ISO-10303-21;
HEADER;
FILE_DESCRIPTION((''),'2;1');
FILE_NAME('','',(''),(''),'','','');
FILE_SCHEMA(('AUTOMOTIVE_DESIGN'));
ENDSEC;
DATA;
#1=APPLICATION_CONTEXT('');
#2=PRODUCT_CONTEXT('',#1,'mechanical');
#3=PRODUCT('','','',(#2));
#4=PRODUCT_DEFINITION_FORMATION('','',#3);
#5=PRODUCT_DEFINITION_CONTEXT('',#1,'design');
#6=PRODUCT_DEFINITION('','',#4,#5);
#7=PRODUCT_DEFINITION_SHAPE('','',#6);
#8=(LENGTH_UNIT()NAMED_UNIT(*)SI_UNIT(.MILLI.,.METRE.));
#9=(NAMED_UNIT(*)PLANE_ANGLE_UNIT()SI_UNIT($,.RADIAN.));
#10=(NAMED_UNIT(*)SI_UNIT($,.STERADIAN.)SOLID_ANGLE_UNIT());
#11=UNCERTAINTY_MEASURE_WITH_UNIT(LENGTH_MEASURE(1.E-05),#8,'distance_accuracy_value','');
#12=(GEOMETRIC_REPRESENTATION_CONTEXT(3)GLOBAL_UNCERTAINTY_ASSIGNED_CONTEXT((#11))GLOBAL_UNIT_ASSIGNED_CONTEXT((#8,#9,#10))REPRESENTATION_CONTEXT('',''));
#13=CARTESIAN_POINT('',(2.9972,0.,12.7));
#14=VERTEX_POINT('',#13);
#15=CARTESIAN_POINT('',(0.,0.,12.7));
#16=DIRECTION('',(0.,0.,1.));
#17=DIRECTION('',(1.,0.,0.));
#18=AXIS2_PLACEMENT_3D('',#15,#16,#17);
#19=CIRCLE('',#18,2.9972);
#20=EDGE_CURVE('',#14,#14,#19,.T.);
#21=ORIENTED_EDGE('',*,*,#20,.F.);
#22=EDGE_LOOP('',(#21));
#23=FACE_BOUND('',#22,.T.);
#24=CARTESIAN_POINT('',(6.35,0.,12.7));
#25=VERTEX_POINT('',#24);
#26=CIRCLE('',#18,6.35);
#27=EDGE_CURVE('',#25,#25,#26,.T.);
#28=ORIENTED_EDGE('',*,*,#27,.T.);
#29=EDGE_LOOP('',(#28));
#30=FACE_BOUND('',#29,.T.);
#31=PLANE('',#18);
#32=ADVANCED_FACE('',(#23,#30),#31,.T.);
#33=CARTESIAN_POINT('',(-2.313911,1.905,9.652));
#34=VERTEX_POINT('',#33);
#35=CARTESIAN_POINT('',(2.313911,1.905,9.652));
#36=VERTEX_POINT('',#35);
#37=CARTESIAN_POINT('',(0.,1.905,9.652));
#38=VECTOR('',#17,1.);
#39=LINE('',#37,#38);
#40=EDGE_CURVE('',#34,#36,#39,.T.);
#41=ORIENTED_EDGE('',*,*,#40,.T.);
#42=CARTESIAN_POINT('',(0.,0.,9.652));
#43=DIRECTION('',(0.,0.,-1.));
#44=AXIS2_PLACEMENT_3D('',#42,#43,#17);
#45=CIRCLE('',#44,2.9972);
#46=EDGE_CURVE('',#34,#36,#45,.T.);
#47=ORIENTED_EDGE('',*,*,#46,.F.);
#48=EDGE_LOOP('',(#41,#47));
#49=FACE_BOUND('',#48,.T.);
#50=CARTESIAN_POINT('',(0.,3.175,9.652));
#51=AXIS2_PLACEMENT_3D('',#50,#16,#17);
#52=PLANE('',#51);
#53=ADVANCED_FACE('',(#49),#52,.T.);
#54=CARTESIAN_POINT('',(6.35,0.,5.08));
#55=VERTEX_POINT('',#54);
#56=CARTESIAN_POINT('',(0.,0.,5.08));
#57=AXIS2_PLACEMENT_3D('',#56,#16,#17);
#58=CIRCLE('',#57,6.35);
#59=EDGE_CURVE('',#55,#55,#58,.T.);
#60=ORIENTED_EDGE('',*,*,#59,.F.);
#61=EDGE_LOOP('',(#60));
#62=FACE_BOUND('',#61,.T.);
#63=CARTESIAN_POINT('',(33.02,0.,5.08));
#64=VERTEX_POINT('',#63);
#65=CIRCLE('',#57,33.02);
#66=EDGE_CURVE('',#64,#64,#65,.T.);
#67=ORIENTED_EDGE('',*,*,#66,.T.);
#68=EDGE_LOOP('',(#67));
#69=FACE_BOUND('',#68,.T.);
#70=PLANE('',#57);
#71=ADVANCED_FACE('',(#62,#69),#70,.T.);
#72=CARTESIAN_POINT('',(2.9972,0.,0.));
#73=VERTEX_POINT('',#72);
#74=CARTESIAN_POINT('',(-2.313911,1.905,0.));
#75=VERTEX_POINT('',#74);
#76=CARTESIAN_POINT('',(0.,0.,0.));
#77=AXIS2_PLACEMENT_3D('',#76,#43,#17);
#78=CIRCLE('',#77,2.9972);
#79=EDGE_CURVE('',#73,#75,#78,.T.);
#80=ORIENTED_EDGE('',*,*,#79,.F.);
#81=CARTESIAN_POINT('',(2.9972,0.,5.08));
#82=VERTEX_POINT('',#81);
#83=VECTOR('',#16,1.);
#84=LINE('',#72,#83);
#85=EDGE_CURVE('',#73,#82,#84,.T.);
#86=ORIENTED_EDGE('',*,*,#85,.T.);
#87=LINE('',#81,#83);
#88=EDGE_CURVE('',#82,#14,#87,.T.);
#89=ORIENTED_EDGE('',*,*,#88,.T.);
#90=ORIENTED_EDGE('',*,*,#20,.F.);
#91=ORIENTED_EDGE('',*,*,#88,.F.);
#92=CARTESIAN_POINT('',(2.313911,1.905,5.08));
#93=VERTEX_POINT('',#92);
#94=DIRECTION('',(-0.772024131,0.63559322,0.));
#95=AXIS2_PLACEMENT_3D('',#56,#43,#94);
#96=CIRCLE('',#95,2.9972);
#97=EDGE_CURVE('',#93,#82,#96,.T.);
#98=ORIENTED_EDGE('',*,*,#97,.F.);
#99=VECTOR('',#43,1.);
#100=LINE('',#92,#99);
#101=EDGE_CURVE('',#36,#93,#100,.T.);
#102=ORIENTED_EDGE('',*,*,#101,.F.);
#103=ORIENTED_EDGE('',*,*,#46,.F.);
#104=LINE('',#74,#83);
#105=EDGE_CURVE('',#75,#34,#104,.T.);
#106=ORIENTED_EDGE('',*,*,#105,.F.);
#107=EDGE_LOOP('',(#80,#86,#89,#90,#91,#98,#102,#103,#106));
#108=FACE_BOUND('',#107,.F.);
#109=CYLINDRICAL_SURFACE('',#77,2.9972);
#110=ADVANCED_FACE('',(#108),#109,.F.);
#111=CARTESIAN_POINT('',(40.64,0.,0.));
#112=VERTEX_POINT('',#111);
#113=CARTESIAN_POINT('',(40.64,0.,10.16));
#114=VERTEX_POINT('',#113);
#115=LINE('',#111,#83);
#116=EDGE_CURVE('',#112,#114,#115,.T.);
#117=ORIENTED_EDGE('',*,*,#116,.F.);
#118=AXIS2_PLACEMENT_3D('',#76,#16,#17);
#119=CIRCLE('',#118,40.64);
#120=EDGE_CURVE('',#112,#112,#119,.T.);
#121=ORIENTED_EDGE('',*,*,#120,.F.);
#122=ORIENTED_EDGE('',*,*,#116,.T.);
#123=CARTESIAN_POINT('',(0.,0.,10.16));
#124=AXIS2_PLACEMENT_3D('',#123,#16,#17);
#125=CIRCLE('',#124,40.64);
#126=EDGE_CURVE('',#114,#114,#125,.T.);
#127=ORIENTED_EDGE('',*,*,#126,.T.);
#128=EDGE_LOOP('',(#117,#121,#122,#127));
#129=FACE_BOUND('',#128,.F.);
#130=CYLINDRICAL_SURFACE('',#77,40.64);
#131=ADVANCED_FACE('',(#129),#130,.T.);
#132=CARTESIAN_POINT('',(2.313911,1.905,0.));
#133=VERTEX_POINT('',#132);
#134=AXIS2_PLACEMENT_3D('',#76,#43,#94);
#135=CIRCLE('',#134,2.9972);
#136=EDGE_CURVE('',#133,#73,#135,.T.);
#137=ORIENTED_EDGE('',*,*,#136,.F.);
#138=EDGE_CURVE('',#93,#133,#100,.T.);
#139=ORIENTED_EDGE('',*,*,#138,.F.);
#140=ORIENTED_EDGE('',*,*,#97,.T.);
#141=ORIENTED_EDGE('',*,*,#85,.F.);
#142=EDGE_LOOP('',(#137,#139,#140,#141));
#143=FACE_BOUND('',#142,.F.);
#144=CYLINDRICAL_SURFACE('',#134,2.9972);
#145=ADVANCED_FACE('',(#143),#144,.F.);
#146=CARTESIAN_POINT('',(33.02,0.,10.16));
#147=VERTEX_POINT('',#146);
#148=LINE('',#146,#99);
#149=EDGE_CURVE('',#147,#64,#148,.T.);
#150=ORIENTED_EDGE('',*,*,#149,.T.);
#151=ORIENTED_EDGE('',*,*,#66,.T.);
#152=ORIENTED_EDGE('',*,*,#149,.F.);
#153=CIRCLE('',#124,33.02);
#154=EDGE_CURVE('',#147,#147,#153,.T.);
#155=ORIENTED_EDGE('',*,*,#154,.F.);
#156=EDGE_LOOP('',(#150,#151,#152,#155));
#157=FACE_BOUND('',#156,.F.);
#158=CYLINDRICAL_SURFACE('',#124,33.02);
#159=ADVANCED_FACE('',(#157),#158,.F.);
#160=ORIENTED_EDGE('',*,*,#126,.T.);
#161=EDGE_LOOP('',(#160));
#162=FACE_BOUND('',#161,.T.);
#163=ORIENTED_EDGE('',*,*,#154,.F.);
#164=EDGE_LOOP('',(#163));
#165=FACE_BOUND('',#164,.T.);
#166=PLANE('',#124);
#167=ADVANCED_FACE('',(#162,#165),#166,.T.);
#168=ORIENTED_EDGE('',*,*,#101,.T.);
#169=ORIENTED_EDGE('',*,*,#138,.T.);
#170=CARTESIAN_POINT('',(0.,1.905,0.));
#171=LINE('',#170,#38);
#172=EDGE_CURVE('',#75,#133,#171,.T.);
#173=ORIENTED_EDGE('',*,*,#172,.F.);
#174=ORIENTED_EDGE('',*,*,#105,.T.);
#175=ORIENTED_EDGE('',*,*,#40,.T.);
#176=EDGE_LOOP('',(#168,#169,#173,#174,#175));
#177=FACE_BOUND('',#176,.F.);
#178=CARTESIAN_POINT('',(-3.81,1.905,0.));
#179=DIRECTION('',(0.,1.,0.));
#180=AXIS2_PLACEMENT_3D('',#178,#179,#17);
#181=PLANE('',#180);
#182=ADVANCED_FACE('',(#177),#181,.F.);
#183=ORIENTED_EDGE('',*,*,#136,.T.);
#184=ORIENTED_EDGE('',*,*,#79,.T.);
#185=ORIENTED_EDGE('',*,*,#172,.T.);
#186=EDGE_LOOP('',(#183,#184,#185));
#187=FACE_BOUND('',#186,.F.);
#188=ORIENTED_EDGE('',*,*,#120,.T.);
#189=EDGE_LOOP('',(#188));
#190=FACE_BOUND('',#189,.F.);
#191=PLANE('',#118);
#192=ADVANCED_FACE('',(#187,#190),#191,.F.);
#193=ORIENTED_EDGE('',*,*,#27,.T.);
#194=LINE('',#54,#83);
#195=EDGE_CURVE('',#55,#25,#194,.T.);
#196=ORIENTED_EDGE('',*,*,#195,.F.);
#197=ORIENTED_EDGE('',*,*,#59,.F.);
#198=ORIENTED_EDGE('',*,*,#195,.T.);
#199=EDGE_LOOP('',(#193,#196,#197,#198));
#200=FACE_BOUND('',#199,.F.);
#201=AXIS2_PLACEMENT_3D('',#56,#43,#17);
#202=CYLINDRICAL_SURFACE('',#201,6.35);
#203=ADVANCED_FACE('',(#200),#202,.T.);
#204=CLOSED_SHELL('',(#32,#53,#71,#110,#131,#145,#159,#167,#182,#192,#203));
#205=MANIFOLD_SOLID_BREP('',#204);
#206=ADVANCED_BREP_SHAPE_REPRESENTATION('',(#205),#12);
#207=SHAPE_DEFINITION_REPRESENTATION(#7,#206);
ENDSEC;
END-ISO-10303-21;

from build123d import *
from build123d import SkipClean  # not in build123d's __all__

# Parameters (mm, degrees)
F0_R          = 40.64
F1_DEPTH      = 10.16
F2_R          = 33.02
F3_DEPTH      = 5.08
F5_DEPTH      = 10.16
F6_R          = 6.35
F6_R_2        = 2.9972
F7_DEPTH      = 7.62
F7_DEPTH_BACK = 0.0127
F8_W          = 7.62
F8_H          = 2.54
F9_DEPTH      = 9.652


# Not quite as in the source:
# - after a boolean that leaves OpenCascade's solid faulty, fix() repairs it


with BuildPart() as f1:
    # F0 (on Top) → F1 (new body)
    with BuildSketch(Plane.XY):
        Circle(F0_R)
    extrude(amount=F1_DEPTH)

    # F2 (on face) → F3 (cut)
    with BuildSketch(Plane.XY.offset(10.16)):
        Circle(F2_R)
    extrude(amount=-F3_DEPTH, mode=Mode.SUBTRACT)

    # F4 (on face) → F5 (cut)
    with BuildSketch(Plane(origin=(0, 0, 0), x_dir=(1, 0, 0), z_dir=(0, 0, -1))):
        with BuildLine():
            Line((2.3139107243, -1.905), (-2.3139107243, -1.905))
            ThreePointArc((-2.3139107243, -1.905), (0, -2.9972), (2.3139107243, -1.905))
        make_face()
        with BuildLine():
            ThreePointArc((2.3139107243, -1.905), (2.8212108272, -1.0119176392), (2.9972, 0))
            ThreePointArc((2.9972, 0), (-1.0119176392, 2.8212108272), (-2.3139107243, -1.905))
            Line((-2.3139107243, -1.905), (2.3139107243, -1.905))
        make_face()
    extrude(amount=-F5_DEPTH, mode=Mode.SUBTRACT)

    # F6 (on face) → F7 (join, two sides)
    with BuildSketch(Plane.XY.offset(5.08)) as f7_sk:
        Circle(F6_R)
        Circle(F6_R_2, mode=Mode.SUBTRACT)
    with SkipClean():  # cleaning this boolean's faces spoils the solid; the shape is the same uncleaned
        extrude(amount=F7_DEPTH)
        extrude(f7_sk.sketch, amount=-F7_DEPTH_BACK)

    # F8 (on Top) → F9 (join)
    with BuildSketch(Plane.XY):
        with Locations((0, 3.175)):
            Rectangle(F8_W, F8_H)
    extrude(amount=F9_DEPTH)

    add(f1.part.fix(), mode=Mode.REPLACE)


solid = f1.part
